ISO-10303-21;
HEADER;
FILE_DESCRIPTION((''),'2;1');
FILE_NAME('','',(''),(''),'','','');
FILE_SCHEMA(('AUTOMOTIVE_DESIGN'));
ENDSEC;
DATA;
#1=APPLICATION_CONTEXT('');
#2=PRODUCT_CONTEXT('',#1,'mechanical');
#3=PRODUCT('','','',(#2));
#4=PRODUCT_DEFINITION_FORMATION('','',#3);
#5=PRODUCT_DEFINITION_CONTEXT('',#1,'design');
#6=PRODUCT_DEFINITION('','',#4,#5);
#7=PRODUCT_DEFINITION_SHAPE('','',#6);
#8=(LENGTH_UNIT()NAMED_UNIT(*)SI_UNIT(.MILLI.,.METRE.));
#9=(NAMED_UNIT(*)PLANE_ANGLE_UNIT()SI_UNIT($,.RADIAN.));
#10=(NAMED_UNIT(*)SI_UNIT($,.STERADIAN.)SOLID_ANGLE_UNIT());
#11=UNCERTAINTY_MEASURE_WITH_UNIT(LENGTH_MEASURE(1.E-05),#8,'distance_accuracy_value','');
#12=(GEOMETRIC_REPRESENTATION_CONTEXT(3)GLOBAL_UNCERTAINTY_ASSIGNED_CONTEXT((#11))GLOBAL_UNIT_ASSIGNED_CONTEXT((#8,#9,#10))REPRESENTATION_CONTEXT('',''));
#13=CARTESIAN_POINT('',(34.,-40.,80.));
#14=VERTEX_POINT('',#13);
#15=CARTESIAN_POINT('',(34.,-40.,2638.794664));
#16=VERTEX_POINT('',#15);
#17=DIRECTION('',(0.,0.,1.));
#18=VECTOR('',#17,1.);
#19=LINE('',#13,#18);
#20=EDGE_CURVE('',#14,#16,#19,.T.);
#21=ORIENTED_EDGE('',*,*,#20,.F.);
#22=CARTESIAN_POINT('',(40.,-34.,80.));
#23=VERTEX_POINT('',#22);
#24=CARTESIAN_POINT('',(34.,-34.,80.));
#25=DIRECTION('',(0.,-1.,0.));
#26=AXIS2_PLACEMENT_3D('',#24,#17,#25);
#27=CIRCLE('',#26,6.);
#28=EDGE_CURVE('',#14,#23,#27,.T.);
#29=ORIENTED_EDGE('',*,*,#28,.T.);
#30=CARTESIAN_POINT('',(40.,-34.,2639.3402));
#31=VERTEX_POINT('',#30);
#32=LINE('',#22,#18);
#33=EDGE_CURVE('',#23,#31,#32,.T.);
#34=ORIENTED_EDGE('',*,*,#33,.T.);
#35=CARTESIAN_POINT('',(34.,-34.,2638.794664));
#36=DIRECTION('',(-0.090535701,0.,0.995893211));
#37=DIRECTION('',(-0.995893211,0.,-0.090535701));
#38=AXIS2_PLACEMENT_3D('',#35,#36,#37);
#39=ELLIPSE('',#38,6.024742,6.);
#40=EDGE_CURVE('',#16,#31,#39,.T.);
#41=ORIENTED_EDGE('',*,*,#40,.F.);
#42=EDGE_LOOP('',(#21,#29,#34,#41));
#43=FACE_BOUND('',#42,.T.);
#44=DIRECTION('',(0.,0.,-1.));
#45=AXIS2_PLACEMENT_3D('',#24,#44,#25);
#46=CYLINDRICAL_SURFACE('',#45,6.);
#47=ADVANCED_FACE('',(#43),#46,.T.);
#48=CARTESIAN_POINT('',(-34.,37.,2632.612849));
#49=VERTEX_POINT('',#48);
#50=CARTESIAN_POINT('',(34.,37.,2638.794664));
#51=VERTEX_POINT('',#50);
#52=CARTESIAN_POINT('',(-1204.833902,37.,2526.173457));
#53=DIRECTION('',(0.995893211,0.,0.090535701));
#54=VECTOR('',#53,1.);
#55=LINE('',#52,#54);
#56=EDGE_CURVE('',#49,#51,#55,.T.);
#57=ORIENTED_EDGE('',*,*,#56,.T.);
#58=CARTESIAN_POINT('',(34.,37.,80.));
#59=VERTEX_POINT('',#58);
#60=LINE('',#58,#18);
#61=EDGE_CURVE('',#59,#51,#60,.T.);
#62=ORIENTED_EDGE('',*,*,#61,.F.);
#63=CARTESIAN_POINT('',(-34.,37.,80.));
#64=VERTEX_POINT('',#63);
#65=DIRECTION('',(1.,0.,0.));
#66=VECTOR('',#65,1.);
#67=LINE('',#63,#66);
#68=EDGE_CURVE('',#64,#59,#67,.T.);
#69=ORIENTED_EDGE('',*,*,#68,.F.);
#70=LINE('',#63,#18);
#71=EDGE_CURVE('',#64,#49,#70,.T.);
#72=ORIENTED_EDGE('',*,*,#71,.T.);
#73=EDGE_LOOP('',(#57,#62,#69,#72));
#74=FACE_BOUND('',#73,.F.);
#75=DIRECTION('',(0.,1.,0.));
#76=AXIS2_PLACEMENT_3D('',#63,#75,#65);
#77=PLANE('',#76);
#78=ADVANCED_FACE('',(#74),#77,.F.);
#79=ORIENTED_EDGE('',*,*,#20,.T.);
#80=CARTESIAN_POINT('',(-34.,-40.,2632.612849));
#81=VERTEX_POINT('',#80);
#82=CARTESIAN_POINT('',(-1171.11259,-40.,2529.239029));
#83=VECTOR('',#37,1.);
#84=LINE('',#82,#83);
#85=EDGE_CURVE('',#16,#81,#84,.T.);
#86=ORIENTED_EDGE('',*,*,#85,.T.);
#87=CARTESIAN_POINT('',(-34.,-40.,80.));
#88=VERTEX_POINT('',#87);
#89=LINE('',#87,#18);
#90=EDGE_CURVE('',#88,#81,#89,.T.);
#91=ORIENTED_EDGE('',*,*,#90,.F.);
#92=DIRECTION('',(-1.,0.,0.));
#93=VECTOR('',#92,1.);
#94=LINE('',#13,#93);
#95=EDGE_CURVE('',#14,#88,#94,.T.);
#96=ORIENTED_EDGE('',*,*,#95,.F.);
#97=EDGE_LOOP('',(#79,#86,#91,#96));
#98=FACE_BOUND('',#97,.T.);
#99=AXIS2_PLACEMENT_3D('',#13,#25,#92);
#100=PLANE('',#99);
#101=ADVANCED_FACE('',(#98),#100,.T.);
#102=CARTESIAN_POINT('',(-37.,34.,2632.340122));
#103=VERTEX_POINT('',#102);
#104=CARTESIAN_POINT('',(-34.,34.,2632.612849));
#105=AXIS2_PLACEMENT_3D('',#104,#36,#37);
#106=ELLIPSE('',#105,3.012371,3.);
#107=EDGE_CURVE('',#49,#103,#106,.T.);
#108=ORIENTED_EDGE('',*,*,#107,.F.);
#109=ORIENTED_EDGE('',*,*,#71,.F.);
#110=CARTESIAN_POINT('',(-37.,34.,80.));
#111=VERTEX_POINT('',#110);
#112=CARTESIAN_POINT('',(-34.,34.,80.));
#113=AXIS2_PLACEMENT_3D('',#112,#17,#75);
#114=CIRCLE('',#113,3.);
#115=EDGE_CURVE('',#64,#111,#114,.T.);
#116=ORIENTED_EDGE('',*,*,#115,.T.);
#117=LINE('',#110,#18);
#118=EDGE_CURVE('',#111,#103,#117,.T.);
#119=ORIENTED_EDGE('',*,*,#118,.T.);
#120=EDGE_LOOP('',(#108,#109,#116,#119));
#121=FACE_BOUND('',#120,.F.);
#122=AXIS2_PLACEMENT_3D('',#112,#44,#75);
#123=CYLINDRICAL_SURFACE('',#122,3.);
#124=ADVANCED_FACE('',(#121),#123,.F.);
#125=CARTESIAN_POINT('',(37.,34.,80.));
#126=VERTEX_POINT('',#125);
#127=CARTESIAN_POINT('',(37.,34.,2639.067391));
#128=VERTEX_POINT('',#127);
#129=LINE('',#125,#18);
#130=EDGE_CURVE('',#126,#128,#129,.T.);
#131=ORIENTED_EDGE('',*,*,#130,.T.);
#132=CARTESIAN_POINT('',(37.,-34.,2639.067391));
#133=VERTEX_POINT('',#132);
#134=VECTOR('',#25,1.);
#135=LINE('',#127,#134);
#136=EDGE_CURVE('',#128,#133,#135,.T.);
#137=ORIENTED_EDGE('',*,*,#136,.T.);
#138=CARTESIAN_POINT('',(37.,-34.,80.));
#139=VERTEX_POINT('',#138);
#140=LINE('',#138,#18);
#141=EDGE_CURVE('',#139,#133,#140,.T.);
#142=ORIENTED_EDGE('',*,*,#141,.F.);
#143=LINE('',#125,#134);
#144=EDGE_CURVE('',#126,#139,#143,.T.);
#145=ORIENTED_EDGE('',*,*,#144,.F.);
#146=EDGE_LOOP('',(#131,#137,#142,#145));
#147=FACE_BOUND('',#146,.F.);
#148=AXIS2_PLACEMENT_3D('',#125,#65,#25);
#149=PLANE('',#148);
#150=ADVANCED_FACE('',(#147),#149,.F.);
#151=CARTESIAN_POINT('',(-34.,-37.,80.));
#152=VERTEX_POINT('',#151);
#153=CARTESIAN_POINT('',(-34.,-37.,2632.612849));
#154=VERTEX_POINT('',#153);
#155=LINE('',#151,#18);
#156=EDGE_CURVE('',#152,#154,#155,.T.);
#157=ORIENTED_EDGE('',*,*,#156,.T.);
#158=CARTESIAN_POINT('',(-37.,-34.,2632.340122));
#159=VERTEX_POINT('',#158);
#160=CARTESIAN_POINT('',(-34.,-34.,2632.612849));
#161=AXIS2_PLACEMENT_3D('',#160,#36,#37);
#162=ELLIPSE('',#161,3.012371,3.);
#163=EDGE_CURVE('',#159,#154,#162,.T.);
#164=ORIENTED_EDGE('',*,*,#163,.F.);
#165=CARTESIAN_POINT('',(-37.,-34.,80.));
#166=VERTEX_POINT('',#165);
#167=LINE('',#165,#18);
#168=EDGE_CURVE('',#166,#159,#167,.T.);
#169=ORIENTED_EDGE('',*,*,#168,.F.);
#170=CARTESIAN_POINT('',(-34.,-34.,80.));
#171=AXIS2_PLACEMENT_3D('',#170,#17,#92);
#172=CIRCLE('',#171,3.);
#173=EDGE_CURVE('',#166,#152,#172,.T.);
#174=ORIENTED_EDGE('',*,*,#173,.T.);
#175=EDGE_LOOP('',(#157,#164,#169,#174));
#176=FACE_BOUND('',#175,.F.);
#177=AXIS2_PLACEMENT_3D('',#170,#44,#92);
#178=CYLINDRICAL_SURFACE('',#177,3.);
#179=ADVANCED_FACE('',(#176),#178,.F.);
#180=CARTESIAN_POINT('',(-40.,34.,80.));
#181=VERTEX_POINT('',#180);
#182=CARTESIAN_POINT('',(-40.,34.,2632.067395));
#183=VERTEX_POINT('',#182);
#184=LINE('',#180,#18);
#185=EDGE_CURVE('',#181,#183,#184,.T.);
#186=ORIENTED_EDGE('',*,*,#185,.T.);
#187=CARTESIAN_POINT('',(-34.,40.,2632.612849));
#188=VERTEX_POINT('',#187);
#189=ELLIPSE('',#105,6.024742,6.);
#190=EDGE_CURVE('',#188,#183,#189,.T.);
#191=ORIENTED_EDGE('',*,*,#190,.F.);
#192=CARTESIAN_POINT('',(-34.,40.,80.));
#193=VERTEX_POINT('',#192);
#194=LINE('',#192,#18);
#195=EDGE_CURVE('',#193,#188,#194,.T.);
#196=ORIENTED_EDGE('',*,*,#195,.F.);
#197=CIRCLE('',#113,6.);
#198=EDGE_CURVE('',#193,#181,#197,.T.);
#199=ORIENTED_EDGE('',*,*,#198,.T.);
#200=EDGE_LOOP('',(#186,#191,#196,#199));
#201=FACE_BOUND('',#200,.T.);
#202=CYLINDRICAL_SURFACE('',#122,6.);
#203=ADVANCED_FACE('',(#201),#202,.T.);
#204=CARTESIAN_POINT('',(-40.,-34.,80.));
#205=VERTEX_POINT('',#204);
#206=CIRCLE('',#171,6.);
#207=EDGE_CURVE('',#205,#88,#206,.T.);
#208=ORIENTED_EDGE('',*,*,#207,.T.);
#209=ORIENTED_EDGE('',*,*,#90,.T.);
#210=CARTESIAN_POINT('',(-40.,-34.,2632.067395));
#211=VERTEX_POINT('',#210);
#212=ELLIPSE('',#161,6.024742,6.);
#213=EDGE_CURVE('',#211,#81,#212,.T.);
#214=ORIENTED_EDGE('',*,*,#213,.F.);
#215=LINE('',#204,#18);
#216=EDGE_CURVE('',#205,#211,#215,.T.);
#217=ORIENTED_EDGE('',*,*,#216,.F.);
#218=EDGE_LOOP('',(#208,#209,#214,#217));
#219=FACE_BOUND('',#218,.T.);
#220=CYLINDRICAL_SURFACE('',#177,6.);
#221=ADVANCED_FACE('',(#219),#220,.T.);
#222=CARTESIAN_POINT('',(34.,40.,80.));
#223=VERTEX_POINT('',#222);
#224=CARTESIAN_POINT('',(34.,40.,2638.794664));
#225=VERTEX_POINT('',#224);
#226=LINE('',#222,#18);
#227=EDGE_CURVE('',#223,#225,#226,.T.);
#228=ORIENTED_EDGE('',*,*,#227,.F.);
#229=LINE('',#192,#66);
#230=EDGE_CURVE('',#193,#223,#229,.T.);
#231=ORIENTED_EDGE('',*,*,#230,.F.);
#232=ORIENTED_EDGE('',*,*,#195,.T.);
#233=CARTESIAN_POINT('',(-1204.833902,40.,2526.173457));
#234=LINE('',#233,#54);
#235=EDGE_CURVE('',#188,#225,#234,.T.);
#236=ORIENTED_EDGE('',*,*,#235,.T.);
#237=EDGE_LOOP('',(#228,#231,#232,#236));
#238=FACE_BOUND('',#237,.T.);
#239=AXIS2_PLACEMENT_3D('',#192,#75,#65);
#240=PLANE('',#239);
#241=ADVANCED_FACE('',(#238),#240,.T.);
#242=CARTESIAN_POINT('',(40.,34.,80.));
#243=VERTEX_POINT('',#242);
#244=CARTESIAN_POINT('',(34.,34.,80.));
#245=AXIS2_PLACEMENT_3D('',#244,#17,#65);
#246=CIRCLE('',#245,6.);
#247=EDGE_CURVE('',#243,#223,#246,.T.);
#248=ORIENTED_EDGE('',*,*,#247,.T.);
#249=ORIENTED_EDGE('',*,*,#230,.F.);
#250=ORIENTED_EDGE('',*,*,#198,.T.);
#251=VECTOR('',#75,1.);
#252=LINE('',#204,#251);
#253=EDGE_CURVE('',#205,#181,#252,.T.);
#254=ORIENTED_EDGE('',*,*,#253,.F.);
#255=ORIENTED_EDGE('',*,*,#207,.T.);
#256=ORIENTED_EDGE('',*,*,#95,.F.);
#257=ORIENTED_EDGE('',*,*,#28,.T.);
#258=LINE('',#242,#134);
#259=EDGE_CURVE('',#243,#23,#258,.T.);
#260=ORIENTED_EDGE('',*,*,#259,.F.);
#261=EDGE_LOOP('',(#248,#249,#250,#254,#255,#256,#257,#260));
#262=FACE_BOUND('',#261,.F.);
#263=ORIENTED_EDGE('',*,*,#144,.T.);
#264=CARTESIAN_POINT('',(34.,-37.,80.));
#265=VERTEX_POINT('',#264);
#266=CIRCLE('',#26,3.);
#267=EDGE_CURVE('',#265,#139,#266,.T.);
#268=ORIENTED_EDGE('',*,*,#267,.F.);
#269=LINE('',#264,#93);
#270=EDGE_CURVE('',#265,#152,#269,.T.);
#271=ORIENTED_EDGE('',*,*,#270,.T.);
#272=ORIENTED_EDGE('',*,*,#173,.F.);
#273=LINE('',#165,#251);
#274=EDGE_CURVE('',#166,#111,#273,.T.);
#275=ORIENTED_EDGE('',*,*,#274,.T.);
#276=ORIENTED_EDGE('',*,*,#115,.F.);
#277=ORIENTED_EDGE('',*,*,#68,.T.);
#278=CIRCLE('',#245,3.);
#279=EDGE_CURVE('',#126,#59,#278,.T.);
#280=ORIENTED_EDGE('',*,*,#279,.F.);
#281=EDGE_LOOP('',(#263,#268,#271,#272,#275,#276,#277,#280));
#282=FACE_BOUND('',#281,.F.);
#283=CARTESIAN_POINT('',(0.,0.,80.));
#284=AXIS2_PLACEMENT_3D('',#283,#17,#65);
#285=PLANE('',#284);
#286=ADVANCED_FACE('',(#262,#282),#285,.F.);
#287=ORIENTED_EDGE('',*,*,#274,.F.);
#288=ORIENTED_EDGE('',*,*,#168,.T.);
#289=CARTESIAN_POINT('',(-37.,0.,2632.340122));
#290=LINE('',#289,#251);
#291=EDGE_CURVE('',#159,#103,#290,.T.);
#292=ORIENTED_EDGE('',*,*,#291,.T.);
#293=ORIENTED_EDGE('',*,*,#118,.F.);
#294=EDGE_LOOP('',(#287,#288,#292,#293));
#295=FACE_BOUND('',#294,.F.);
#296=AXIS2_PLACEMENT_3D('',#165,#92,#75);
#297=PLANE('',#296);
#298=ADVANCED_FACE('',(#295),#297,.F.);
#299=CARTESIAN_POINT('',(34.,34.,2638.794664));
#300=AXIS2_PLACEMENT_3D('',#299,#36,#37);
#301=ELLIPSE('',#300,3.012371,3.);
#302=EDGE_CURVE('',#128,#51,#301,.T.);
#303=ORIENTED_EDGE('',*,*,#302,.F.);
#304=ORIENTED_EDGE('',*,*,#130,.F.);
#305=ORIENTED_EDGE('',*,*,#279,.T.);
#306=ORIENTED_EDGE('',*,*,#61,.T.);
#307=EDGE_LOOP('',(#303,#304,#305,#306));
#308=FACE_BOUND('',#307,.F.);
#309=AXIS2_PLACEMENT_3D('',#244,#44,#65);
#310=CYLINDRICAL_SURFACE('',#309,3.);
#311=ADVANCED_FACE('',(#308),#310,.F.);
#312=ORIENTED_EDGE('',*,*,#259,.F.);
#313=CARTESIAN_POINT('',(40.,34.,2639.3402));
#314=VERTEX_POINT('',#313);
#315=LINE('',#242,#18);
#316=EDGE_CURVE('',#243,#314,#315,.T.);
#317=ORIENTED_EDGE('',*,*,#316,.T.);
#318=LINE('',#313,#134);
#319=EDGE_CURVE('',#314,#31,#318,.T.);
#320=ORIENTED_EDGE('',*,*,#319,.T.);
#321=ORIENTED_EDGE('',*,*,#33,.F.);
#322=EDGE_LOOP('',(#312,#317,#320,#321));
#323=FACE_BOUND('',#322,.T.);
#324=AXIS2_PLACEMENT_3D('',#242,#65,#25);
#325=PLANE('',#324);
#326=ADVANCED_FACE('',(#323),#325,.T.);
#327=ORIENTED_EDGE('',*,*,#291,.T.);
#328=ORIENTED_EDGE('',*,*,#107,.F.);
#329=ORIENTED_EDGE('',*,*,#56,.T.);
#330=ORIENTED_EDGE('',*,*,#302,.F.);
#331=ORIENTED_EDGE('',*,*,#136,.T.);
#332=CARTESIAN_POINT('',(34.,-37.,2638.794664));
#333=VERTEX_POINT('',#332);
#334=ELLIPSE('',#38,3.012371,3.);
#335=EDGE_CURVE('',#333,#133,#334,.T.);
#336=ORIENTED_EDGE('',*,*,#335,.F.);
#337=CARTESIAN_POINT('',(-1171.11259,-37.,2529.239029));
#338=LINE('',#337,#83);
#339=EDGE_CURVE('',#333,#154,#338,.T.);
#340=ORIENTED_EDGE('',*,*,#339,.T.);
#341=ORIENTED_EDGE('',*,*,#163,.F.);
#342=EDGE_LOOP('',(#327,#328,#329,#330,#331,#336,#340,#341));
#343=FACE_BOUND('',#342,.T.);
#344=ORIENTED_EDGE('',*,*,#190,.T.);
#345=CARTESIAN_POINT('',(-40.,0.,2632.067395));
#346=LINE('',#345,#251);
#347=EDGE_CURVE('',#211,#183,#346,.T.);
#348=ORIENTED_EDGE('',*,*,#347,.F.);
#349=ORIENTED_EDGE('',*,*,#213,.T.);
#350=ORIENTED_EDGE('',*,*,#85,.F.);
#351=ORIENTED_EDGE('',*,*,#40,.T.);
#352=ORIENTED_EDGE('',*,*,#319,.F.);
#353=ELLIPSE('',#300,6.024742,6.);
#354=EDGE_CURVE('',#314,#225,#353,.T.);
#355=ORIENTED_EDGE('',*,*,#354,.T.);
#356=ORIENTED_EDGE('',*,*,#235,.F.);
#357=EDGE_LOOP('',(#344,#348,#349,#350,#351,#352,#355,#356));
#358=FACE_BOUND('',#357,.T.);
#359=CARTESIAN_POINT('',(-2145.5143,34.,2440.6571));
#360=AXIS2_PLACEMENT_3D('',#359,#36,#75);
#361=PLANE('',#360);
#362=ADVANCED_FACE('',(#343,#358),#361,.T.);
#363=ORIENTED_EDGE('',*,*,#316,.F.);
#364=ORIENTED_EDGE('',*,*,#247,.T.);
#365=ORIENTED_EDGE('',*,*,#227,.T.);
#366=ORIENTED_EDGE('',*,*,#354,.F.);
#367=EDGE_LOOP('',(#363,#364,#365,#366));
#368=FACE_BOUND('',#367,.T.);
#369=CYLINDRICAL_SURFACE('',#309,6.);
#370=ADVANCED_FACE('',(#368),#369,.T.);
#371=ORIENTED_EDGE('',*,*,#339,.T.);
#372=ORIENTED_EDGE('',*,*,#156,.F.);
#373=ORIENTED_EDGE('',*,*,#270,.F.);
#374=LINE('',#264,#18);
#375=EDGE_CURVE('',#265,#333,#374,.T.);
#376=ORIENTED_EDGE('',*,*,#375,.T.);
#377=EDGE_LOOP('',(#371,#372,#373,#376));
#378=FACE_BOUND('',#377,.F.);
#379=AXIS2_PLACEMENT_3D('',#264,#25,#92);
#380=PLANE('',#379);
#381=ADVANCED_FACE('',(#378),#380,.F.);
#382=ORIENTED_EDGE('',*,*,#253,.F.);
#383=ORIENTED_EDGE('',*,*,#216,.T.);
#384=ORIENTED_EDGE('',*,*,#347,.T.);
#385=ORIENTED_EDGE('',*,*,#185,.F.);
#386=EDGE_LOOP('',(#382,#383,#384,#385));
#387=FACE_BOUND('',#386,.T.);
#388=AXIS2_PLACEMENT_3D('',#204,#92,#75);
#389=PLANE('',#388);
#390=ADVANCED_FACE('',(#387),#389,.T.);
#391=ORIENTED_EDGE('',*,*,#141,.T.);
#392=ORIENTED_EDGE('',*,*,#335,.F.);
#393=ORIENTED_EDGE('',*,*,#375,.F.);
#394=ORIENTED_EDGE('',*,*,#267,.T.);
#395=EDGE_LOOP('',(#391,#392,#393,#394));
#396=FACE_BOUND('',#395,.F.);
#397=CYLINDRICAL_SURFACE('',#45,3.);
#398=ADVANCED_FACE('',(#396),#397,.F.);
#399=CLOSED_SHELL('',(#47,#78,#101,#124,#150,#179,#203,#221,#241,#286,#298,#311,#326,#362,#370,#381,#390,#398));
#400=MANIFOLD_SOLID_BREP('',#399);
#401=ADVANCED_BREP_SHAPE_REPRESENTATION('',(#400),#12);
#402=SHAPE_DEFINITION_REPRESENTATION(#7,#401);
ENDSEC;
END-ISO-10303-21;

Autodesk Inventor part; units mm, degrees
ref_plane "Start Plane" through (0, 0, 80) normal (0, 0, 1) x (1, 0, 0)
ref_plane "End Plane" through (0, 0, 2639.3402) normal (0, 0, 1) x (1, 0, 0)
sketch "Sketch" plane through (0, 0, 0) normal (0, 0, 1) x (1, 0, 0)
  line L0 (-40, -34) -> (-40, 34)
  line L1 (-34, 40) -> (34, 40)
  line L2 (40, 34) -> (40, -34)
  line L3 (34, -40) -> (-34, -40)
  arc A0 (-40, -34) -> (-34, -40) centre (-34, -34) ccw
  arc A1 (40, 34) -> (34, 40) centre (34, 34) ccw
  arc A2 (-34, 40) -> (-40, 34) centre (-34, 34) ccw
  arc A3 (34, -40) -> (40, -34) centre (34, -34) ccw
  arc A4 (-34, 37) -> (-37, 34) centre (-34, 34) ccw
  line L4 (-34, 37) -> (34, 37)
  arc A5 (37, 34) -> (34, 37) centre (34, 34) ccw
  line L5 (37, 34) -> (37, -34)
  arc A6 (34, -37) -> (37, -34) centre (34, -34) ccw
  line L6 (34, -37) -> (-34, -37)
  arc A7 (-37, -34) -> (-34, -37) centre (-34, -34) ccw
  line L7 (-37, -34) -> (-37, 34)
  line L8 (0, 57.7397) -> (0, -57.7397) construction
  line L9 (-57.7397, 0) -> (57.7397, 0) construction
  dimension "d7" = 6
  dimension "d9" = 80
  dimension "d11" = 80
  dimension "d12" = 3
  dimension "d15" = 40
  dimension "d16" = 40
extrude "Body" add sketch "Sketch" along normal up to surface (2559.3402 mm away) from surface at 80
sketch "Sketch3" plane through (0, 0, 0) normal (0, 0, 1) x (1, 0, 0)
  line L0 (0, 0) -> (10, 0)
ref_plane "Work Plane3" through (0, 0, 0) normal (0, -1, 0) x (1, 0, 0)
ref_plane "Work Plane4" through (40, 34, 80) normal (0, 0, -1) x (-1, 0, 0)
split "Split1" plane through (40, 34, 80) removes the side toward (0, 0, -1)
ref_plane "Work Plane5" through (-2145.5143, 34, 2440.6571) normal (-0.0905357, 0, 0.9958932) x (0.9958932, 0, 0.0905357)
split "Split2" plane through (-2145.5143, 34, 2440.6571) removes the side toward (-0.0905357, 0, 0.9958932)
sketch "Sketch4" plane through (0, 0, 0) normal (0, -1, 0) x (1, 0, 0)
  line L0 (-2, 80) -> (12, 80) projected
  line L1 (-2, 2639.3402) -> (12, 2639.3402) projected
  dimension "d18" = 2559.3402
equation "\"d7\" = G_IR"
equation "\"d9\" = G_W"
equation "\"d11\" = G_H"
equation "\"d12\" = G_T"
equation "\"d15\" = 0.5 * d9"
equation "\"d16\" = 0.5 * d11"
equation "\"d3\" = G_L"
equation "\"G_W\" = 80"
equation "\"G_H\" = 80"
equation "\"G_T\" = 3"
equation "\"G_IR\" = 6"
equation "\"G_L\" = d18"
equation "\"G_OFFSET_END\" = -160.6598"
equation "\"d14\" = G_OFFSET_END + B_L"
equation "\"B_L\" = 2800"
properties part number "ISO 10799-2 - 80x80x3 - 2559,34" material "Steel, Mild"
